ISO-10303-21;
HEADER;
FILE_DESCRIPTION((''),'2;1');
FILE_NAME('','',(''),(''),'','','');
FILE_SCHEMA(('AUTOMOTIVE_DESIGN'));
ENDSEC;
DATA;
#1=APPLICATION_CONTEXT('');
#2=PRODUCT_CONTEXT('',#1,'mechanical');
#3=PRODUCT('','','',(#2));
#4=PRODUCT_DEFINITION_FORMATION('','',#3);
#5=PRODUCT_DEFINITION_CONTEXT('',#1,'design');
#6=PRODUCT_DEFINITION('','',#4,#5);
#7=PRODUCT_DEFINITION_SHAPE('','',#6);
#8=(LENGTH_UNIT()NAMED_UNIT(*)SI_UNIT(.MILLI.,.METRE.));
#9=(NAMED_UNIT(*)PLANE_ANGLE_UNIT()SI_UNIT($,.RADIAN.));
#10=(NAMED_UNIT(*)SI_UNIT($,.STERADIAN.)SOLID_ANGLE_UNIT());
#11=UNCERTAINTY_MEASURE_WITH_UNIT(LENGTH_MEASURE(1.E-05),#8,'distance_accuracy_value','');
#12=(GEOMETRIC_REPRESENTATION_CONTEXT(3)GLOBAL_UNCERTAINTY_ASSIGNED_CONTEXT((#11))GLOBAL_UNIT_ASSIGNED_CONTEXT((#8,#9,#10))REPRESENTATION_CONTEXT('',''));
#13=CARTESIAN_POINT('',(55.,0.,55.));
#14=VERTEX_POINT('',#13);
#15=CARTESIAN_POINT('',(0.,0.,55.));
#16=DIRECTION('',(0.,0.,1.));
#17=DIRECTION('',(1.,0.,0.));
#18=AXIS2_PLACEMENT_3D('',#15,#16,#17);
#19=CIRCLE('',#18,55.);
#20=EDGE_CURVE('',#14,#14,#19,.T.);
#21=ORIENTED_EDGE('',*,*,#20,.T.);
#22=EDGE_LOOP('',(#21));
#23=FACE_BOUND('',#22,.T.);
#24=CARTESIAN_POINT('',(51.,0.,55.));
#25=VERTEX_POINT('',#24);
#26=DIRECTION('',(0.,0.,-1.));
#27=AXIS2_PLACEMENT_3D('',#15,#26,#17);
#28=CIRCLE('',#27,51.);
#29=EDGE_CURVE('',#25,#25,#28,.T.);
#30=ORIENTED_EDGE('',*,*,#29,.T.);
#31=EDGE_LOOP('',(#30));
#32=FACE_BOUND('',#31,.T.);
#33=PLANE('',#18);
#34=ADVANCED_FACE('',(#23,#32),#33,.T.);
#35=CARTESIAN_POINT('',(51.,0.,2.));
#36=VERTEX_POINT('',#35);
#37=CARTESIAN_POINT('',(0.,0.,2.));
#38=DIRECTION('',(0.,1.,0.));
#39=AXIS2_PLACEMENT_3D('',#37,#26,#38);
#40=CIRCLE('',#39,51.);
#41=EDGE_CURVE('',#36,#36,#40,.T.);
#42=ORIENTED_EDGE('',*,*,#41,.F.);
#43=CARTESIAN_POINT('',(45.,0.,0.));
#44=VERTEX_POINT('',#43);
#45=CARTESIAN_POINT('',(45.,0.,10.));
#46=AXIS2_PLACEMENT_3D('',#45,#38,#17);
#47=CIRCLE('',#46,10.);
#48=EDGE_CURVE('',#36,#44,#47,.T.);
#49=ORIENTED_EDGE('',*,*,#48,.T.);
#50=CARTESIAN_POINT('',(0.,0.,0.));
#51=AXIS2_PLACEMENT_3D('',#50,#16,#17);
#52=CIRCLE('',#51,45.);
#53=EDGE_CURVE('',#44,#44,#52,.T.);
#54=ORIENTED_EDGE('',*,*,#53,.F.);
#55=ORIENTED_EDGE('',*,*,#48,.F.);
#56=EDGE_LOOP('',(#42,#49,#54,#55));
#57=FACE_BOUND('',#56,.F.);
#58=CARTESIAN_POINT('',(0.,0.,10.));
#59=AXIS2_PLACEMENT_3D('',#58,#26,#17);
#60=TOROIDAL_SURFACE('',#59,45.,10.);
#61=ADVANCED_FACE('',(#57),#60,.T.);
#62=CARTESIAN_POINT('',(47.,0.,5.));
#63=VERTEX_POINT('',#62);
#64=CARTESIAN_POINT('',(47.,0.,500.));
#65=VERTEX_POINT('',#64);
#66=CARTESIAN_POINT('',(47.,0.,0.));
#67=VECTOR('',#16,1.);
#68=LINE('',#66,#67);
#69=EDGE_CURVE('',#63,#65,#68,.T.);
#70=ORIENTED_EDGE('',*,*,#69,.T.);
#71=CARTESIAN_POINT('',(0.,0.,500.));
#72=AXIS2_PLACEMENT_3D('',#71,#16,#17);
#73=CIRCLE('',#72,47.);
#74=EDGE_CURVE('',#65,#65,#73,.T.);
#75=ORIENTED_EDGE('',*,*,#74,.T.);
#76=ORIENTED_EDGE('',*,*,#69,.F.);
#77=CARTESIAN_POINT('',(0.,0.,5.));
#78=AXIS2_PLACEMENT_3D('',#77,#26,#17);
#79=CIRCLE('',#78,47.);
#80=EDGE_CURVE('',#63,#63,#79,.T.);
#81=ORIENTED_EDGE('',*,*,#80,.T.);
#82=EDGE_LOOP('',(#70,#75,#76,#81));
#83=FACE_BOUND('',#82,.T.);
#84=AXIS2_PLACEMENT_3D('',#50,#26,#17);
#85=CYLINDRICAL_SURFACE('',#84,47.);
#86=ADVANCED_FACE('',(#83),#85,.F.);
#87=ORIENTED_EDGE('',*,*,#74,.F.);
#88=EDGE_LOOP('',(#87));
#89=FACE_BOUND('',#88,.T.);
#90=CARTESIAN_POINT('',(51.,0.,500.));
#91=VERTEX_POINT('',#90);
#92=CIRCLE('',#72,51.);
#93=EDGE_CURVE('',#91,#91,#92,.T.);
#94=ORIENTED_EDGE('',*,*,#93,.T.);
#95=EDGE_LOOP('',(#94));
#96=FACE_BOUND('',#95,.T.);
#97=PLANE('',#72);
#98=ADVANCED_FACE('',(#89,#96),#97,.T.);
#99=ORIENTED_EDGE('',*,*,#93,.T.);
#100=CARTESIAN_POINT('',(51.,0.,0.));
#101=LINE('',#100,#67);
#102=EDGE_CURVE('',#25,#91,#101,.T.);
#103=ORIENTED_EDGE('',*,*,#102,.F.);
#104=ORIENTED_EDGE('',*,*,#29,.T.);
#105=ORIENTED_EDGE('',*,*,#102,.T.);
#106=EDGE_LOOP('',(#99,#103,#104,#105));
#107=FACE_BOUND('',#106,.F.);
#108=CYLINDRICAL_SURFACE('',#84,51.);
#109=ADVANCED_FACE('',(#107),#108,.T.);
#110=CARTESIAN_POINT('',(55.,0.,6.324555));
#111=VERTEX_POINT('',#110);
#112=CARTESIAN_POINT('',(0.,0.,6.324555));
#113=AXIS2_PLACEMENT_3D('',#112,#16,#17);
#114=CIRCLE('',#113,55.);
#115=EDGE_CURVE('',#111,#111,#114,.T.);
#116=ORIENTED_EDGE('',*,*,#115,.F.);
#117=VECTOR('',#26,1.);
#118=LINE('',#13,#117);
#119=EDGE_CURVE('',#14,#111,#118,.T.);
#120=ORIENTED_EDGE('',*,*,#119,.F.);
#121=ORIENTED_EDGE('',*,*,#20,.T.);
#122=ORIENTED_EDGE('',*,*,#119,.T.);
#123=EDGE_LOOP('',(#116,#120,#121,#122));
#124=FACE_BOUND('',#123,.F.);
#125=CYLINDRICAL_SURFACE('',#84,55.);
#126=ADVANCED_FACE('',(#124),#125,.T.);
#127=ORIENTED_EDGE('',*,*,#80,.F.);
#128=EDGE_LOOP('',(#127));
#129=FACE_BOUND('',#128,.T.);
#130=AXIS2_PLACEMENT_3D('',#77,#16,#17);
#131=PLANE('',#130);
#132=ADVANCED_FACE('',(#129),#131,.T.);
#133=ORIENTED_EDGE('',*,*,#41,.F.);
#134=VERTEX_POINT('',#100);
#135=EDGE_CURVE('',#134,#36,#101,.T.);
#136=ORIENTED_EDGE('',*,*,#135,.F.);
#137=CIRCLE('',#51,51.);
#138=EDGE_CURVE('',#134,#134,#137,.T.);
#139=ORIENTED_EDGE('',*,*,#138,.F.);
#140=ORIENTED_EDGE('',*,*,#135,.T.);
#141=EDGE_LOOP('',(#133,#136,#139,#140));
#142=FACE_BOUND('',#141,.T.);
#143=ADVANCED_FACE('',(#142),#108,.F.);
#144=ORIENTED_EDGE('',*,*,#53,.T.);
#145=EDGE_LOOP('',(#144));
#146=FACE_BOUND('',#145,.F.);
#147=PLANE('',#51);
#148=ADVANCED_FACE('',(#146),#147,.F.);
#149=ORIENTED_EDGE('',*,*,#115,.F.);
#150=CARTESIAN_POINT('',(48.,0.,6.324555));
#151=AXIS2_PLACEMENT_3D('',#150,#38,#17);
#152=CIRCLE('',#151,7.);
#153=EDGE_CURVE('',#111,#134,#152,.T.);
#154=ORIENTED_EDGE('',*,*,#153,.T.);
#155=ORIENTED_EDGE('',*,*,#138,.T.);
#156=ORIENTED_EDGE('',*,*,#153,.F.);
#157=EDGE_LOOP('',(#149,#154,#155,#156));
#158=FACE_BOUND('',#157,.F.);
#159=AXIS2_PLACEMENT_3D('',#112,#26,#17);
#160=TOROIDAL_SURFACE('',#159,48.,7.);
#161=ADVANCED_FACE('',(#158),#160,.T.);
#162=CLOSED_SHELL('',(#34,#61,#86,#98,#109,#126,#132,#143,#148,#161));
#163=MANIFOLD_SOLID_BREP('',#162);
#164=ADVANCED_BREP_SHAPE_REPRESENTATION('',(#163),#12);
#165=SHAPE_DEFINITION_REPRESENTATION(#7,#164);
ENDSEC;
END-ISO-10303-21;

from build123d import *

# Parameters (mm, degrees)
F0_R     = 55
F0_R_2   = 51
F0_R_3   = 47
F1_DEPTH = 5
F2_DEPTH = 500
F3_DEPTH = 50
F4_R     = 10
F5_DEPTH = 25
F6_DEPTH = 25
F7_DEPTH = 25


# Not quite as in the source:
# - a fillet or chamfer that OpenCascade refuses, or shapes differently, is made with other operations: its cross-section is extruded or revolved along the edge and cut away or added


with BuildPart() as f1:
    # F0 (on Top) → F1 (new body)
    with BuildSketch(Plane.XY):
        Circle(F0_R)
        Circle(F0_R_2, mode=Mode.SUBTRACT)
        Circle(F0_R_2)
        Circle(F0_R_3, mode=Mode.SUBTRACT)
        Circle(F0_R_3)
    extrude(amount=F1_DEPTH)

    # F0 (on Top) → F2 (join)
    with BuildSketch(Plane.XY):
        Circle(F0_R_2)
        Circle(F0_R_3, mode=Mode.SUBTRACT)
    extrude(amount=F2_DEPTH)

    # F3 (add): a face of the model
    f3_faces = [f1.faces().sort_by_distance(p)[0] for p in [
        (-53.4443650814, 0, 5),
    ]]
    extrude(f3_faces, amount=F3_DEPTH)

    # F4
    f4_edges = [f1.edges().sort_by_distance(p)[0] for p in [
        (-55, 0, 0),
    ]]
    fillet(f4_edges, radius=F4_R)

    # F0 (on Top) → F5 (join)
    with BuildSketch(Plane.XY):
        Circle(F0_R)
        Circle(F0_R_2, mode=Mode.SUBTRACT)
    extrude(amount=F5_DEPTH)

    # F0 (on Top) → F6 (join)
    with BuildSketch(Plane.XY):
        Circle(F0_R)
        Circle(F0_R_2, mode=Mode.SUBTRACT)
    extrude(amount=F6_DEPTH)

    # F0 (on Top) → F7 (join)
    with BuildSketch(Plane.XY):
        Circle(F0_R)
        Circle(F0_R_2, mode=Mode.SUBTRACT)
    extrude(amount=F7_DEPTH)

    # F8: fillet of radius 7 on 1 edges, made by hand

    # F8_s1 → F8_t2 (revolve, cut)
    with BuildSketch(Plane.XZ):
        with BuildLine():
            ThreePointArc((55, 6.3245553203), (53.9160797831, 2.5828979336), (51, 0))
            Line((51, 0), (55, 0))
            Line((55, 0), (55, 6.3245553203))
        make_face()
    revolve(axis=Axis((0, 0, 0), (0, 0, 1)), mode=Mode.SUBTRACT)


solid = f1.part
